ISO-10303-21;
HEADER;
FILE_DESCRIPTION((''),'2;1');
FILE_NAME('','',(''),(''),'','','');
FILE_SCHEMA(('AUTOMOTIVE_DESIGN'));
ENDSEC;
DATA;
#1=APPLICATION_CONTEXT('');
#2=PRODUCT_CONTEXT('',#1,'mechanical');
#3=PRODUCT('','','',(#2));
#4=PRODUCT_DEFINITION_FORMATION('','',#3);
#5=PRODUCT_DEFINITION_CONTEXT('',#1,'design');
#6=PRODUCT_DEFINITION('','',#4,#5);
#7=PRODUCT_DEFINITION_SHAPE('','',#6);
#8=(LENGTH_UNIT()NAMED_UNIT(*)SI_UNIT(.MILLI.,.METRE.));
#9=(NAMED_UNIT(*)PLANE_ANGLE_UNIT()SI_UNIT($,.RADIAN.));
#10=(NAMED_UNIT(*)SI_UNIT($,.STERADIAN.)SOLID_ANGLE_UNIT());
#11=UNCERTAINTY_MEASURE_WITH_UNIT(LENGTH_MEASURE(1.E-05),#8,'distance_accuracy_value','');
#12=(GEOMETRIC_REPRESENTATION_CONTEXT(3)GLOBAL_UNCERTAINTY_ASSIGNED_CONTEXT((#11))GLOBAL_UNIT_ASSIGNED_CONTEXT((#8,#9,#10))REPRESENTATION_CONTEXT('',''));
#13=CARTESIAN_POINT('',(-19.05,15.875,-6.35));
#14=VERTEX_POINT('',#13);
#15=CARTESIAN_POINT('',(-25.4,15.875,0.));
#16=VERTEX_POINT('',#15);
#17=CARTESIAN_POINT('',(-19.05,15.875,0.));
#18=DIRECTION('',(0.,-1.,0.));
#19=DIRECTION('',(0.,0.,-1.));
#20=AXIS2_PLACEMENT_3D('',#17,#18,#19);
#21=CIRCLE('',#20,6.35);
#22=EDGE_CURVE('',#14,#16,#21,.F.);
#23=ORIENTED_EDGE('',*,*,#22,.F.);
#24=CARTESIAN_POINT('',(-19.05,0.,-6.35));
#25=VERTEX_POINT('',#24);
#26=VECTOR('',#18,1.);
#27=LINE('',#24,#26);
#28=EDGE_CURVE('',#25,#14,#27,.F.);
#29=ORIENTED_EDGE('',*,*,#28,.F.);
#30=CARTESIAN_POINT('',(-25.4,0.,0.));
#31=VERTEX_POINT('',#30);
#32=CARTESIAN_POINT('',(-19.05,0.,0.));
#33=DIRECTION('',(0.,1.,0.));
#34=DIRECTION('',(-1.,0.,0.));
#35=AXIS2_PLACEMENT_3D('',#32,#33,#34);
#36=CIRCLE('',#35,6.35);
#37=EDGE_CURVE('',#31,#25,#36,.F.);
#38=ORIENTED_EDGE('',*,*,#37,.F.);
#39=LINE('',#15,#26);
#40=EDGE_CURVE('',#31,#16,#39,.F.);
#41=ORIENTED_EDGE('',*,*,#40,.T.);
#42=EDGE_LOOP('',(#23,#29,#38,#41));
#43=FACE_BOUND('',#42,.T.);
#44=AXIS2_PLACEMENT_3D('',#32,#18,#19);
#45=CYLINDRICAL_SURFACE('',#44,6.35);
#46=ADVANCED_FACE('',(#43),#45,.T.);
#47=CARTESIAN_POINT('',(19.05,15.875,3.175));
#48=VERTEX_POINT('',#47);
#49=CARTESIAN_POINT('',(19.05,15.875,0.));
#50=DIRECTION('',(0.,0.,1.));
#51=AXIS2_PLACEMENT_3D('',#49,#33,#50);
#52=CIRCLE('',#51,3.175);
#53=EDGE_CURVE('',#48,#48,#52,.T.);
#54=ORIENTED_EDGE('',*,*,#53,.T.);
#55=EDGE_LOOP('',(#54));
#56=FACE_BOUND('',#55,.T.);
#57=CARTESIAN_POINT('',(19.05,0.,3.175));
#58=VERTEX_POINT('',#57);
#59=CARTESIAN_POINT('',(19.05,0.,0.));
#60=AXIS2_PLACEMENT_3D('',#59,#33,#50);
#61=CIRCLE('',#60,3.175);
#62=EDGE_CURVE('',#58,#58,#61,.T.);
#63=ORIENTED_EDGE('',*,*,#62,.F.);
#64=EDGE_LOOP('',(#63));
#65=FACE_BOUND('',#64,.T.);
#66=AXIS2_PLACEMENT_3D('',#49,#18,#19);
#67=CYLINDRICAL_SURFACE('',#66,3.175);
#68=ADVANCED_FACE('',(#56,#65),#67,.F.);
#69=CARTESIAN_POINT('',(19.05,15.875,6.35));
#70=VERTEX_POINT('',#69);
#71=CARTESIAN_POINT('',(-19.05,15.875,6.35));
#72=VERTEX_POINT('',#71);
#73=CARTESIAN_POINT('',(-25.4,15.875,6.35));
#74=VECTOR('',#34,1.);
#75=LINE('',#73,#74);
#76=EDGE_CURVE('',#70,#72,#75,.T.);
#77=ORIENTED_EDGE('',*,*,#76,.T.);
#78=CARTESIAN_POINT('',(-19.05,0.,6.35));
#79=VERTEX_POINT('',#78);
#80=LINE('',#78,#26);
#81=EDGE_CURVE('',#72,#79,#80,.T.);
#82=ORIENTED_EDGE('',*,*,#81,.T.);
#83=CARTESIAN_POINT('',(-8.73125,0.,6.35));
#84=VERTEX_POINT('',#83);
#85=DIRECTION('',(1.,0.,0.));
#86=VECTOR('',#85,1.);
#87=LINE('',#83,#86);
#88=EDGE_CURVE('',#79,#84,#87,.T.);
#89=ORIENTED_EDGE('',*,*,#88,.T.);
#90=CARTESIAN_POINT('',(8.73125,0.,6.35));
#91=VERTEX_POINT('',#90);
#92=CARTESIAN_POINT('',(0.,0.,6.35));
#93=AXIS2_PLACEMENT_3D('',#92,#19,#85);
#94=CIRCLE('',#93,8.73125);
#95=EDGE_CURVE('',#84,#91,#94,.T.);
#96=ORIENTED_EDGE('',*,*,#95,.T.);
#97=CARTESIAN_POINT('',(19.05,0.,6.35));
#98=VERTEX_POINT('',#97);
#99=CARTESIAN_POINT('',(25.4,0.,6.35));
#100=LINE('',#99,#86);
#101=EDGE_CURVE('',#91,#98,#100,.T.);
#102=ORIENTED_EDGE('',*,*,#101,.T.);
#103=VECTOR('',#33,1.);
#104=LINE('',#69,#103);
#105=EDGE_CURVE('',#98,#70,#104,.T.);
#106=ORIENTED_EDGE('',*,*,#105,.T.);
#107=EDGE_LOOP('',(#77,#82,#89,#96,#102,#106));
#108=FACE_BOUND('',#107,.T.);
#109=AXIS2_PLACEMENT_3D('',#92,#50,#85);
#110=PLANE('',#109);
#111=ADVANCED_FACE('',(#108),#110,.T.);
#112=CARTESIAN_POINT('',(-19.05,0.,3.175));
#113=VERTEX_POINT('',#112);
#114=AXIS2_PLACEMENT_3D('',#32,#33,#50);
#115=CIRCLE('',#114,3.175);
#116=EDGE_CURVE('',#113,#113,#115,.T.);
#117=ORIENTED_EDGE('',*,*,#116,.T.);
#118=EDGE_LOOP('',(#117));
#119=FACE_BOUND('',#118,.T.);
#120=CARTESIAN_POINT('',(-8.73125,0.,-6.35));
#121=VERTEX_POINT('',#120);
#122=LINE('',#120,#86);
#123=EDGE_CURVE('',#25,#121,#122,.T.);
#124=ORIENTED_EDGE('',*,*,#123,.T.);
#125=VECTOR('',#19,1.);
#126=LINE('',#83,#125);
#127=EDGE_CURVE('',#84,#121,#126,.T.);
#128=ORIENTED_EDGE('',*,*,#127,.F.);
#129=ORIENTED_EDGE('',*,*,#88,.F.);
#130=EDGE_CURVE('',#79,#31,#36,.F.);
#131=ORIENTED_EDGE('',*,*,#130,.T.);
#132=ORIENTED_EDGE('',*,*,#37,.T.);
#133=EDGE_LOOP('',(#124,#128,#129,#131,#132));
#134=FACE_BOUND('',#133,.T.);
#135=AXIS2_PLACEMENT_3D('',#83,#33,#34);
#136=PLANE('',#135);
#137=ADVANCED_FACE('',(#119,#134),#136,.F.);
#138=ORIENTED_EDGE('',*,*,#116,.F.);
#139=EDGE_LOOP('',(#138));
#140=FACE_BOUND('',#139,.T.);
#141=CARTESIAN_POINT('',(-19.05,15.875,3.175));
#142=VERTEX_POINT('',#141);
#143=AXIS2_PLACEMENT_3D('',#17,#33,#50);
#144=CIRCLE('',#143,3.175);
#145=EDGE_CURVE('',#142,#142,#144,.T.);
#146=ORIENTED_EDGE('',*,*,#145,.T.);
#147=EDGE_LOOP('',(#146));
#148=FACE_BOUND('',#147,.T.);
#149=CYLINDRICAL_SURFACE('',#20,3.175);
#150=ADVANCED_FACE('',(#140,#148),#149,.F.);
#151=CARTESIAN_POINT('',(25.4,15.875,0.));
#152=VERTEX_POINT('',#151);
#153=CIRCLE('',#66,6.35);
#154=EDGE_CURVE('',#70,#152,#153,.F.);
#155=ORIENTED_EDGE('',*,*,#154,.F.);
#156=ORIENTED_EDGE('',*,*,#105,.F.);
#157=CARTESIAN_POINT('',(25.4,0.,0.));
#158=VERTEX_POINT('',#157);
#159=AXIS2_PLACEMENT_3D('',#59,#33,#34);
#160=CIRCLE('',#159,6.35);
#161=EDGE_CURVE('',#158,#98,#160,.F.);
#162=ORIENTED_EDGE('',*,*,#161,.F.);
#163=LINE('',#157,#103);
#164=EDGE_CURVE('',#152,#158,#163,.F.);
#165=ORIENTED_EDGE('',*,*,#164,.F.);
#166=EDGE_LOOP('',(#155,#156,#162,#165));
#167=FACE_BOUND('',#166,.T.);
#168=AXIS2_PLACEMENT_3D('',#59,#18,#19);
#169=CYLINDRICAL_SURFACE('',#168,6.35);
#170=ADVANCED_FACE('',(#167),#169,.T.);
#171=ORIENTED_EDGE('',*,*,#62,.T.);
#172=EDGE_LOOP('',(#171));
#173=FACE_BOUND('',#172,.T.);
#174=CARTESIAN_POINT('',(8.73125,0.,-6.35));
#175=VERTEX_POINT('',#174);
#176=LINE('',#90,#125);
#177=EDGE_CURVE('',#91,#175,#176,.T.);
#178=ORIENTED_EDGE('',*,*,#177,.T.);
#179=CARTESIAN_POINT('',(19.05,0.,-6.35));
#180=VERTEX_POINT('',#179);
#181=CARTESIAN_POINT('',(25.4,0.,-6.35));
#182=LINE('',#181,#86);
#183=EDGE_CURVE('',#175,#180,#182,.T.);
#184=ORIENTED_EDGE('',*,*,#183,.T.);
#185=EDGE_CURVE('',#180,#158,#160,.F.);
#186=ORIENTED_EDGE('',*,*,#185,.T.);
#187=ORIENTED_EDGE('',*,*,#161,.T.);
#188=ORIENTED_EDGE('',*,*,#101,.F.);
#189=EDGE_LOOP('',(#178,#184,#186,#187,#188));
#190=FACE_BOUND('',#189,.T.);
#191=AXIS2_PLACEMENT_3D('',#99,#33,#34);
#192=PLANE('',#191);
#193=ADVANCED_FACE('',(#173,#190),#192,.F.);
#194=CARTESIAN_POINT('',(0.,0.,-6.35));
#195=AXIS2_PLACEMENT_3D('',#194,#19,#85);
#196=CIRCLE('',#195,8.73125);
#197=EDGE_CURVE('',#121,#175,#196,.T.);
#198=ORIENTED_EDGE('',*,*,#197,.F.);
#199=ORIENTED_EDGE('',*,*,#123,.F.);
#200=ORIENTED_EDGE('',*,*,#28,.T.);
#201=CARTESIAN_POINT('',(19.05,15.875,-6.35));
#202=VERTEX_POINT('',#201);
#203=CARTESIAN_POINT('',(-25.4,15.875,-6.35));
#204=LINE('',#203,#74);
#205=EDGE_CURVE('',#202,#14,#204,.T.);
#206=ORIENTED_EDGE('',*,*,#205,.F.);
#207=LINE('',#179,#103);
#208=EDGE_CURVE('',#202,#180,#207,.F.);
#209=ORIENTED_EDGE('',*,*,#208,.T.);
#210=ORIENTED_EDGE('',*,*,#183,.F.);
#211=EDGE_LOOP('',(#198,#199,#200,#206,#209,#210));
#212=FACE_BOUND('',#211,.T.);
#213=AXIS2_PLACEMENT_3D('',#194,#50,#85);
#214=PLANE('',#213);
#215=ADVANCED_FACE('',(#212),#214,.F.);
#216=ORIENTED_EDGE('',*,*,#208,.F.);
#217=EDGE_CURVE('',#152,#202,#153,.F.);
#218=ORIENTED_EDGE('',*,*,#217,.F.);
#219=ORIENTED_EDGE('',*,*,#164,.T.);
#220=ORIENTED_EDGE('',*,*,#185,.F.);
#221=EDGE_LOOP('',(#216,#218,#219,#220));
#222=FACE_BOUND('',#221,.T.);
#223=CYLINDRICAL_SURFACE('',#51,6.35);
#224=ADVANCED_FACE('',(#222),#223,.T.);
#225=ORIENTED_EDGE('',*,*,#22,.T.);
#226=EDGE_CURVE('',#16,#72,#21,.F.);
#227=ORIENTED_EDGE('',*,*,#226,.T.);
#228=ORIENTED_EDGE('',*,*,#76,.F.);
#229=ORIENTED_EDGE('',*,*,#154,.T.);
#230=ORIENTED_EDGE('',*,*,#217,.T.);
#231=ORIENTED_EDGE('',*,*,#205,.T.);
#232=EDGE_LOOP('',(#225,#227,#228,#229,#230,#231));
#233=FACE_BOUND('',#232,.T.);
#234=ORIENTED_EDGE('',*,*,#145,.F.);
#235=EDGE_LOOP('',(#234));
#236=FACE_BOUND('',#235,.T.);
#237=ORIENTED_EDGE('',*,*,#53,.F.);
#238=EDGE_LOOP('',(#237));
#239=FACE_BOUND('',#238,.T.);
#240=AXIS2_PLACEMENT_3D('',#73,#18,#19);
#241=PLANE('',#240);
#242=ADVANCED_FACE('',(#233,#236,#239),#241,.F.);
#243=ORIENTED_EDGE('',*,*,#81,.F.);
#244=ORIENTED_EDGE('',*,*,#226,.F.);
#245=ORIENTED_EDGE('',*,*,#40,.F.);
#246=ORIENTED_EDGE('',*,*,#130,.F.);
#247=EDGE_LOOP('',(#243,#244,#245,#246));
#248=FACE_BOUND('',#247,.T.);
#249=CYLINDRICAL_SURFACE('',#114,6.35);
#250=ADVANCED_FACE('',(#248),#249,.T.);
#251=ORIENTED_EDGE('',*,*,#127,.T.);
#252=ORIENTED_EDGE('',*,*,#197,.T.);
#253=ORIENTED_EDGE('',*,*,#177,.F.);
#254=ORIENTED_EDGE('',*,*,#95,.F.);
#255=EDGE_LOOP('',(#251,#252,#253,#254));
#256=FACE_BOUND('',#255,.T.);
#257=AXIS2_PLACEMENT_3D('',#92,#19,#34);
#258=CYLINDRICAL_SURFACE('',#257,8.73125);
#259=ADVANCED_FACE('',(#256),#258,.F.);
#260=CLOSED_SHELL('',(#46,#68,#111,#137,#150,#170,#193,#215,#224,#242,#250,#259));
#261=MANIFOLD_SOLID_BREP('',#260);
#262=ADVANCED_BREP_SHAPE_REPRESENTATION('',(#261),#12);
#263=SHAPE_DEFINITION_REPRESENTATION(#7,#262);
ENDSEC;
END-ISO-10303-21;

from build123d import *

# Parameters (mm, degrees)
BOSS_EXTRUDE1_DEPTH = 6.35
SKETCH2_R           = 3.175
CUT_EXTRUDE1_DEPTH  = 31.618591166
FILLET1_R           = 6.35


with BuildPart() as part:
    # Sketch1 → Boss-Extrude1 (new, symmetric)
    with BuildSketch(Plane.XY):
        with BuildLine():
            Line((-8.73125, 0), (-25.4, 0))
            Line((-25.4, 0), (-25.4, 15.875))
            Line((-25.4, 15.875), (25.4, 15.875))
            Line((25.4, 15.875), (25.4, 0))
            Line((25.4, 0), (8.73125, 0))
            ThreePointArc((8.73125, 0), (0, 8.73125), (-8.73125, 0))
        make_face()
    extrude(amount=BOSS_EXTRUDE1_DEPTH, both=True)

    # Sketch2 → Cut-Extrude1 (cut, through all)
    with BuildSketch(Plane(origin=(0, 0, 0), x_dir=(1, 0, 0), z_dir=(0, 1, 0))):
        with Locations(Location((-19.05, 0, 0), (0, 0, 270))):
            Circle(SKETCH2_R)
        with Locations(Location((19.05, 0, 0), (0, 0, 270))):
            Circle(SKETCH2_R)
    extrude(amount=CUT_EXTRUDE1_DEPTH, mode=Mode.SUBTRACT)

    # Fillet1
    fillet1_edges = [part.edges().sort_by_distance(p)[0] for p in [
        (25.4, 7.9375, -6.35),
        (25.4, 7.9375, 6.35),
        (-25.4, 7.9375, -6.35),
        (-25.4, 7.9375, 6.35),
    ]]
    fillet(fillet1_edges, radius=FILLET1_R - 0.0001)  # a hair under: the kernel refuses the full size


solid = part.part
